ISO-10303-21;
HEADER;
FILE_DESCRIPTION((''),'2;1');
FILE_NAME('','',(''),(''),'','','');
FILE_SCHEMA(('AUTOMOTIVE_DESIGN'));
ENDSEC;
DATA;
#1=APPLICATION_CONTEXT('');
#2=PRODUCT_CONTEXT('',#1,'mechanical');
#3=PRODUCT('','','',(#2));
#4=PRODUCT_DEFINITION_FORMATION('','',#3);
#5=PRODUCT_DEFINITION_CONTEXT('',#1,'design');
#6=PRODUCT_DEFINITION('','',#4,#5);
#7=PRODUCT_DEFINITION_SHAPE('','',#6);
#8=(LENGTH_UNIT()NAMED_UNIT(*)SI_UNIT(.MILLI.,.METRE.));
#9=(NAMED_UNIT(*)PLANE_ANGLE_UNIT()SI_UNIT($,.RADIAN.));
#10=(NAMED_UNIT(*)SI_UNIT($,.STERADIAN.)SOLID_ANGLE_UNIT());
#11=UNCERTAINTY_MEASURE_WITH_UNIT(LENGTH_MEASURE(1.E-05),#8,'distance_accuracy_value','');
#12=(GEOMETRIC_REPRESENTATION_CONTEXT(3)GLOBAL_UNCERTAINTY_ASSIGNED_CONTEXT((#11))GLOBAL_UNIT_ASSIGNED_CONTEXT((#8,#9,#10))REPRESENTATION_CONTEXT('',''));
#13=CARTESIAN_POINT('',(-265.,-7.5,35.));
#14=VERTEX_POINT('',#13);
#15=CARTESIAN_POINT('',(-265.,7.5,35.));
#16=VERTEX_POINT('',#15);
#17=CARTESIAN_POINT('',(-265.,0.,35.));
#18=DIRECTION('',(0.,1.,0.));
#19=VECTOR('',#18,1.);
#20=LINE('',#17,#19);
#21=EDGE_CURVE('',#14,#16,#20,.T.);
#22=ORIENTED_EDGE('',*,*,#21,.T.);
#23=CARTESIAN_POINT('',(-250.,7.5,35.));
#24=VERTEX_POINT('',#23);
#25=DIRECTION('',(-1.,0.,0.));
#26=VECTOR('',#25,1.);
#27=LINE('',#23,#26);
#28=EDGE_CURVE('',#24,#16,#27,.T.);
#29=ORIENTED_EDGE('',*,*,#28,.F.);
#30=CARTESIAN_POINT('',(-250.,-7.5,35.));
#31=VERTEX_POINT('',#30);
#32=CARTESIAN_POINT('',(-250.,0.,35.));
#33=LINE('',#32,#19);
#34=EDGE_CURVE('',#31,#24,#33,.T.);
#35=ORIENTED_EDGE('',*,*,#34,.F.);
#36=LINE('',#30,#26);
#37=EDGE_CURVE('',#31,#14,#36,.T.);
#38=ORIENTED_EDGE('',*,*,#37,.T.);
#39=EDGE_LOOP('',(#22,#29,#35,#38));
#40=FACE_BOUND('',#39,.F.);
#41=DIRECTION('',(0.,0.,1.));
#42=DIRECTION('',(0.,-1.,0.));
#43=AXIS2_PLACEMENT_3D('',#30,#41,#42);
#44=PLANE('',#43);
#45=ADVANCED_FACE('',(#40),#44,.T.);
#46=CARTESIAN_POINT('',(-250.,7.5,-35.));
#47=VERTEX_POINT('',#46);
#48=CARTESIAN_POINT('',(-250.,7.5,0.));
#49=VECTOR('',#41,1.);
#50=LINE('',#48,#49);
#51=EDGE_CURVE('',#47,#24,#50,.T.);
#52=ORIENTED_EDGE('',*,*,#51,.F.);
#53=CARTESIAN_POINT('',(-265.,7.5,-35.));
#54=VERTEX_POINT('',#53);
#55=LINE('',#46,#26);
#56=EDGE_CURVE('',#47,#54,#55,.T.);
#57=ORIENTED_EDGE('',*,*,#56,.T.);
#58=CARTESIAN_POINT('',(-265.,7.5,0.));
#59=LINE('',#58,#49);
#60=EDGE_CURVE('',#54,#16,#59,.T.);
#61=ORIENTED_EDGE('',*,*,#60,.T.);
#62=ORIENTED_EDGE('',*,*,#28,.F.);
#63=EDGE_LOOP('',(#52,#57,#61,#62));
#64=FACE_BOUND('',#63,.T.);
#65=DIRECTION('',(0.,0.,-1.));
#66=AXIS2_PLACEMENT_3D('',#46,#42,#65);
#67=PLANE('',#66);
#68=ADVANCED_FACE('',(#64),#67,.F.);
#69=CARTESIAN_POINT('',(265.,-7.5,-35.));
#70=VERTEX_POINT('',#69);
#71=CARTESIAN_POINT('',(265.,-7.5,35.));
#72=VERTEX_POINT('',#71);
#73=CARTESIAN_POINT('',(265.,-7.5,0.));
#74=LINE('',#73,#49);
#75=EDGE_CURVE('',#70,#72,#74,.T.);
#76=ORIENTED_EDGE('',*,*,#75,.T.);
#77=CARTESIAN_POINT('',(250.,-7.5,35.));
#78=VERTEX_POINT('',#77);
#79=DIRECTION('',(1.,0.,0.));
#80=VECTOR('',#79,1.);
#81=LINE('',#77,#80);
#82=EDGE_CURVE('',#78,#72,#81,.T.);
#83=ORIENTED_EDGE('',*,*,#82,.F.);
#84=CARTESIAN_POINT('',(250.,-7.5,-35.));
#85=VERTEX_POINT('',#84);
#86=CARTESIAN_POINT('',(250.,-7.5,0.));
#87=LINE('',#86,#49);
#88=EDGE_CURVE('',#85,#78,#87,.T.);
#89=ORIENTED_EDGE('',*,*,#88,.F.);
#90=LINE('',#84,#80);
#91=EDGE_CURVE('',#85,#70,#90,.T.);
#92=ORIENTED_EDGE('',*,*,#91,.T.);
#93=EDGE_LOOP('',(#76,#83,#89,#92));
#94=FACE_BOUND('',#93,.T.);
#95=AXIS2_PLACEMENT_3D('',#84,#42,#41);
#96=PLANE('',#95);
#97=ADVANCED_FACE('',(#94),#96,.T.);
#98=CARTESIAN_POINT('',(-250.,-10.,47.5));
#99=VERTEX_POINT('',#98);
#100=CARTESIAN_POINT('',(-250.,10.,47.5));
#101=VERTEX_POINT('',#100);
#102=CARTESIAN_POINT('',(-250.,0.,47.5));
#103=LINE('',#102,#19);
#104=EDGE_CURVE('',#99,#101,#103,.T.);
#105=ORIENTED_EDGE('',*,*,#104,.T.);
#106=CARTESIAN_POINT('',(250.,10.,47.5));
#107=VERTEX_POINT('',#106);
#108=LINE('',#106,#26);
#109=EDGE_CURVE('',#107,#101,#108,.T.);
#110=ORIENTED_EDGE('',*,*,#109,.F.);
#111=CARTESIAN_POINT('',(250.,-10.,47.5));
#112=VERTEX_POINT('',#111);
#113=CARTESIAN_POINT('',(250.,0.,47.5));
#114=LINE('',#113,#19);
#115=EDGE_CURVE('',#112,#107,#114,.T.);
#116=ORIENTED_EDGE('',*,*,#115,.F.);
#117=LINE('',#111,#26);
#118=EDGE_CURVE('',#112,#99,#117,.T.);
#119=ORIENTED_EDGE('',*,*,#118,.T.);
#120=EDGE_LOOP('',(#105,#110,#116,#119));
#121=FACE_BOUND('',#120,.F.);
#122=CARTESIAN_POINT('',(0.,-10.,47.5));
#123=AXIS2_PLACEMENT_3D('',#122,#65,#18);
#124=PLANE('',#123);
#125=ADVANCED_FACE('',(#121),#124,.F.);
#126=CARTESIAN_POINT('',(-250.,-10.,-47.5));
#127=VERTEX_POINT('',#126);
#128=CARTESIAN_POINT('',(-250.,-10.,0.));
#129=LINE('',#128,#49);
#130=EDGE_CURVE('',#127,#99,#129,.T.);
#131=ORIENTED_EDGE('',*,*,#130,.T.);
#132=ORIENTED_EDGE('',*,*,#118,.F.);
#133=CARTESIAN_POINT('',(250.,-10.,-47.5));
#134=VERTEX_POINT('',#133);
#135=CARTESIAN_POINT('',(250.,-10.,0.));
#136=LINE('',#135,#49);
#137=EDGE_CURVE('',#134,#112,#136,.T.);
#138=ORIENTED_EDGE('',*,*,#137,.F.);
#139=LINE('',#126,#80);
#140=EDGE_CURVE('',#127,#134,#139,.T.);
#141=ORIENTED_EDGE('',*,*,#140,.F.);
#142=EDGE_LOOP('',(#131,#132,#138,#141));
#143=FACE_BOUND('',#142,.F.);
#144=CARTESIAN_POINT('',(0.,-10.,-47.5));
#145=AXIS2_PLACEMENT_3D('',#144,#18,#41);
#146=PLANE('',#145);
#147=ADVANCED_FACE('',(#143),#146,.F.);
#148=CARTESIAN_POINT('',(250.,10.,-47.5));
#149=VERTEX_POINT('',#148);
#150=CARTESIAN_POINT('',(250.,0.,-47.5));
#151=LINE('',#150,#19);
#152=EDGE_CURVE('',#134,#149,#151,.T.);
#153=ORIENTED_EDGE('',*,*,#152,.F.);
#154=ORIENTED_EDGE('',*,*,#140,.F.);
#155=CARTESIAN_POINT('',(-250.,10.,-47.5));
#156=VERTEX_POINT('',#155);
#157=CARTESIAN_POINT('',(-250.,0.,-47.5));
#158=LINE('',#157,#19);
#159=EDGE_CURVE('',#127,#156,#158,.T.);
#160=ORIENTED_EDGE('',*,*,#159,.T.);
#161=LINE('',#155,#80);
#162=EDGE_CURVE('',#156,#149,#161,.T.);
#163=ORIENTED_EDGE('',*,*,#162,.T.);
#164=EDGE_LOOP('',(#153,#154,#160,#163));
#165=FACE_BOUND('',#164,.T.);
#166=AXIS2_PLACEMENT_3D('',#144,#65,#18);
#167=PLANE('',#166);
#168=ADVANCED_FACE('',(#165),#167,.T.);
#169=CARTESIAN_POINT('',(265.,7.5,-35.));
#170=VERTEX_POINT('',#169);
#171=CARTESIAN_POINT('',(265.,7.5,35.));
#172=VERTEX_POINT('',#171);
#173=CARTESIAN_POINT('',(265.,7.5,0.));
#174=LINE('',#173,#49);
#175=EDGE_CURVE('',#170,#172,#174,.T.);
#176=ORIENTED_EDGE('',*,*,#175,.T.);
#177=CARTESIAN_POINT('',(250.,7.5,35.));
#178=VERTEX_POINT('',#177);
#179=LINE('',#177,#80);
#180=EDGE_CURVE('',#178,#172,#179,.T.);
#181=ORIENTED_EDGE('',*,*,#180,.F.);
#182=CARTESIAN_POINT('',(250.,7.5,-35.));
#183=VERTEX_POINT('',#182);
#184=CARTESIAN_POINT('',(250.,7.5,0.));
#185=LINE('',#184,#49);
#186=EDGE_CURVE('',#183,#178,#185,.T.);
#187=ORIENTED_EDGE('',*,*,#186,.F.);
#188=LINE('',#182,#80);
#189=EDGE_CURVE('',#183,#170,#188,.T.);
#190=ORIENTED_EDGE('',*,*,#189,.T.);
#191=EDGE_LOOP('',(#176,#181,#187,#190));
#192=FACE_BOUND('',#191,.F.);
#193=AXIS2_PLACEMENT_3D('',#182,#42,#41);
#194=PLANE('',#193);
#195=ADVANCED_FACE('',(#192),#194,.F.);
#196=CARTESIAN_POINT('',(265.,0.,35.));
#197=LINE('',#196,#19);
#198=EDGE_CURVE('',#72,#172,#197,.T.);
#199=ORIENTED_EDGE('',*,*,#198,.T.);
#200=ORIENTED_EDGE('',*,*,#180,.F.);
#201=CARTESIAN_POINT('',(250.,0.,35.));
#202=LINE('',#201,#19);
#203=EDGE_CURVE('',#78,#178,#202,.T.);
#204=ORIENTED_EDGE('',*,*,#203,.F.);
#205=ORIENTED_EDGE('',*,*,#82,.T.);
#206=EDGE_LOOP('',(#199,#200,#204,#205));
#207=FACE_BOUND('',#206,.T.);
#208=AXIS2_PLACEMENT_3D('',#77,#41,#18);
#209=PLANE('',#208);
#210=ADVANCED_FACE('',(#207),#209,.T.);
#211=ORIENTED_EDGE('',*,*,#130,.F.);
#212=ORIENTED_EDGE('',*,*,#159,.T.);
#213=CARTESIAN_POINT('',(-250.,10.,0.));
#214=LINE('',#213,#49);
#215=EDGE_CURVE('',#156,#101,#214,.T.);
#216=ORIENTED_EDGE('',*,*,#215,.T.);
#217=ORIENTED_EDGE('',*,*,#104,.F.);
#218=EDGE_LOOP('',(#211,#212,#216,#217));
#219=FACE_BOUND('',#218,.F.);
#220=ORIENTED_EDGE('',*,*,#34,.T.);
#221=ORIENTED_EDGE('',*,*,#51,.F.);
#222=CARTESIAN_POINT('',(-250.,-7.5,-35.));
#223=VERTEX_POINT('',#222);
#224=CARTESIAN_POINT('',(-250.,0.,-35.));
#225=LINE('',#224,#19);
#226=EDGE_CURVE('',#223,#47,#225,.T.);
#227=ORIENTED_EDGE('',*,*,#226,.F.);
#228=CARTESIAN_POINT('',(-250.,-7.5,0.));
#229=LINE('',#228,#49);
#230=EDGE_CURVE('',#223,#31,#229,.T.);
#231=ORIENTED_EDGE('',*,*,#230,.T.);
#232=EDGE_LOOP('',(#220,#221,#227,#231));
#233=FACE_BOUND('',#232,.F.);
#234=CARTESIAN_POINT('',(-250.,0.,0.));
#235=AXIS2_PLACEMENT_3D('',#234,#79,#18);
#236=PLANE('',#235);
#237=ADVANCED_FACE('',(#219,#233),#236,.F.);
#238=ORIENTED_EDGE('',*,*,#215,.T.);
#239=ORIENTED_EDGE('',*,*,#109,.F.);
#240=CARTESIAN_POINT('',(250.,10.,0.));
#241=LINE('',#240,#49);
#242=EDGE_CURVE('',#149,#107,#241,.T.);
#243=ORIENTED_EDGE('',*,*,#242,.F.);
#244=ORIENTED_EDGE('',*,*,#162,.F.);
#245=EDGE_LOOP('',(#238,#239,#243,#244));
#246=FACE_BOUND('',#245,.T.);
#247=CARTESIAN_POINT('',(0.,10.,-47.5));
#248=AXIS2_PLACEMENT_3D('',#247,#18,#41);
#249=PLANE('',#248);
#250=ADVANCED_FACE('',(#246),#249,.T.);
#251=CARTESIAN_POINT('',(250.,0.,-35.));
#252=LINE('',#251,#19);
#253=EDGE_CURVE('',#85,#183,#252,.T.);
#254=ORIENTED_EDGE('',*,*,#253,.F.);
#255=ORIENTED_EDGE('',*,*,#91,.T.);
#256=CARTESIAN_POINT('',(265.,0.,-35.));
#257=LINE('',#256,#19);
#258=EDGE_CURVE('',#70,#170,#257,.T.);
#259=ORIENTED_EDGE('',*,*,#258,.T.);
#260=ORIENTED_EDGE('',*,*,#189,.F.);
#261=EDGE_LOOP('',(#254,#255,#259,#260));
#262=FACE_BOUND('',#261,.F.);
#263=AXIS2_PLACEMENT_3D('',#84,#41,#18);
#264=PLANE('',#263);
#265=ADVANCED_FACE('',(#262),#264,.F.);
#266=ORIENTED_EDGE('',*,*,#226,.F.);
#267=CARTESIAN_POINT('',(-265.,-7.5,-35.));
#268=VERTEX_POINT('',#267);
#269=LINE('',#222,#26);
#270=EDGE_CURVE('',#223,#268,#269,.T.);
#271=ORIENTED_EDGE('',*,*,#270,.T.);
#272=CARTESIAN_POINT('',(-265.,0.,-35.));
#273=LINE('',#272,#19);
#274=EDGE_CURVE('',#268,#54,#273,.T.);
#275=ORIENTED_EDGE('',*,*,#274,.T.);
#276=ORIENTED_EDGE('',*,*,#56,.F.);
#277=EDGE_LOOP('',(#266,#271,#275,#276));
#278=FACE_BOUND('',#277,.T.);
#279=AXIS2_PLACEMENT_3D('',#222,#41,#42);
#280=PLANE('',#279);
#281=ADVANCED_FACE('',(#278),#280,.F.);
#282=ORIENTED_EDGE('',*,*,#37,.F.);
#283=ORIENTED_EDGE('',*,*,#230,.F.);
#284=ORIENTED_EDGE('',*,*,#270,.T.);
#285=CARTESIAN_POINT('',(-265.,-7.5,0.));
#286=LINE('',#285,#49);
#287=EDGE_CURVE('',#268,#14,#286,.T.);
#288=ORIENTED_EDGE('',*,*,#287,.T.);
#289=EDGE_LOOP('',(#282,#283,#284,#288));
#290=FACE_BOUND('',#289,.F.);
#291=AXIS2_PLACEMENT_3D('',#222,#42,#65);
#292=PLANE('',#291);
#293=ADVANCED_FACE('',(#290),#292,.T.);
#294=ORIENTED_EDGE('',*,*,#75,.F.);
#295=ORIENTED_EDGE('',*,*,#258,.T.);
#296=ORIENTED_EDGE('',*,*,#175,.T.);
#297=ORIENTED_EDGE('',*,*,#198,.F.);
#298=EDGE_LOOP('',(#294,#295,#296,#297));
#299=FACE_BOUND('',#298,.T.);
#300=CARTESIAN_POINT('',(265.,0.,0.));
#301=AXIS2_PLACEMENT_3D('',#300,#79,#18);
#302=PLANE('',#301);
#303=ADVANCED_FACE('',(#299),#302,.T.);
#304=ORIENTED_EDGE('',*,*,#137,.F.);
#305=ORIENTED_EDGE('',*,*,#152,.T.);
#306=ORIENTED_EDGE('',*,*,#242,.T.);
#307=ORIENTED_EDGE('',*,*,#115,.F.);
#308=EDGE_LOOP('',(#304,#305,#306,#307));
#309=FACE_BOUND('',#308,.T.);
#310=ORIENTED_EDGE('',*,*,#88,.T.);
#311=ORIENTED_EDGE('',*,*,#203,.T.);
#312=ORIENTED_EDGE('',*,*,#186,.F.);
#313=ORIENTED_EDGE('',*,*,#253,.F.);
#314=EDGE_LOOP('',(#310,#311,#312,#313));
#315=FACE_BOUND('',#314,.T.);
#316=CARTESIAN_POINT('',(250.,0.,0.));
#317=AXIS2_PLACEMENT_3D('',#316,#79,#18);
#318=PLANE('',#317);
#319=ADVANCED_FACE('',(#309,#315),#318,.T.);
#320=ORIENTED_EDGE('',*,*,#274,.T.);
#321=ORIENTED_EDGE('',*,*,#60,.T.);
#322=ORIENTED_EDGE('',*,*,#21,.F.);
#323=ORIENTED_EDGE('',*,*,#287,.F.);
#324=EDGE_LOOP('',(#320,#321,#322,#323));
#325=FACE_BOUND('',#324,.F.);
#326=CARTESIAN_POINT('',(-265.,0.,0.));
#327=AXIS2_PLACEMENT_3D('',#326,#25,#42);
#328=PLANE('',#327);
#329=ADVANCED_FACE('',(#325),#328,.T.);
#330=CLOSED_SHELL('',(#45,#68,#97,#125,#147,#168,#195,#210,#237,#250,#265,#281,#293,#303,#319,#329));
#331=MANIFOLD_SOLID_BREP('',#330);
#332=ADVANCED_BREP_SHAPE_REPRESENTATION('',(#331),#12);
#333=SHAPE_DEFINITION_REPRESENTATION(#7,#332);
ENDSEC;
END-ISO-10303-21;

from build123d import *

# Parameters (mm, degrees)
F0_W     = 20
F0_H     = 95
F1_DEPTH = 250
F2_W     = 15
F2_H     = 70
F3_DEPTH = 15


# Not quite as in the source:
# - a pattern or mirror of a feature is missing from the dataset's text; its kind, count and spacing are read off the source's solid


with BuildPart() as f1:
    # F0 (on Right) → F1 (new body, symmetric)
    with BuildSketch(Plane.YZ):
        Rectangle(F0_W, F0_H)
    extrude(amount=F1_DEPTH, both=True)

    # F2 (on face) → F3 (join)
    with BuildSketch(Plane.YZ.offset(250)):
        Rectangle(F2_W, F2_H)
    f3 = extrude(amount=F3_DEPTH)

    # F3_copies: F3 across plane
    add(f3.mirror(Plane(origin=(0, 0, 0), x_dir=(0, 0, -1), z_dir=(-1, 0, 0))))


solid = f1.part
